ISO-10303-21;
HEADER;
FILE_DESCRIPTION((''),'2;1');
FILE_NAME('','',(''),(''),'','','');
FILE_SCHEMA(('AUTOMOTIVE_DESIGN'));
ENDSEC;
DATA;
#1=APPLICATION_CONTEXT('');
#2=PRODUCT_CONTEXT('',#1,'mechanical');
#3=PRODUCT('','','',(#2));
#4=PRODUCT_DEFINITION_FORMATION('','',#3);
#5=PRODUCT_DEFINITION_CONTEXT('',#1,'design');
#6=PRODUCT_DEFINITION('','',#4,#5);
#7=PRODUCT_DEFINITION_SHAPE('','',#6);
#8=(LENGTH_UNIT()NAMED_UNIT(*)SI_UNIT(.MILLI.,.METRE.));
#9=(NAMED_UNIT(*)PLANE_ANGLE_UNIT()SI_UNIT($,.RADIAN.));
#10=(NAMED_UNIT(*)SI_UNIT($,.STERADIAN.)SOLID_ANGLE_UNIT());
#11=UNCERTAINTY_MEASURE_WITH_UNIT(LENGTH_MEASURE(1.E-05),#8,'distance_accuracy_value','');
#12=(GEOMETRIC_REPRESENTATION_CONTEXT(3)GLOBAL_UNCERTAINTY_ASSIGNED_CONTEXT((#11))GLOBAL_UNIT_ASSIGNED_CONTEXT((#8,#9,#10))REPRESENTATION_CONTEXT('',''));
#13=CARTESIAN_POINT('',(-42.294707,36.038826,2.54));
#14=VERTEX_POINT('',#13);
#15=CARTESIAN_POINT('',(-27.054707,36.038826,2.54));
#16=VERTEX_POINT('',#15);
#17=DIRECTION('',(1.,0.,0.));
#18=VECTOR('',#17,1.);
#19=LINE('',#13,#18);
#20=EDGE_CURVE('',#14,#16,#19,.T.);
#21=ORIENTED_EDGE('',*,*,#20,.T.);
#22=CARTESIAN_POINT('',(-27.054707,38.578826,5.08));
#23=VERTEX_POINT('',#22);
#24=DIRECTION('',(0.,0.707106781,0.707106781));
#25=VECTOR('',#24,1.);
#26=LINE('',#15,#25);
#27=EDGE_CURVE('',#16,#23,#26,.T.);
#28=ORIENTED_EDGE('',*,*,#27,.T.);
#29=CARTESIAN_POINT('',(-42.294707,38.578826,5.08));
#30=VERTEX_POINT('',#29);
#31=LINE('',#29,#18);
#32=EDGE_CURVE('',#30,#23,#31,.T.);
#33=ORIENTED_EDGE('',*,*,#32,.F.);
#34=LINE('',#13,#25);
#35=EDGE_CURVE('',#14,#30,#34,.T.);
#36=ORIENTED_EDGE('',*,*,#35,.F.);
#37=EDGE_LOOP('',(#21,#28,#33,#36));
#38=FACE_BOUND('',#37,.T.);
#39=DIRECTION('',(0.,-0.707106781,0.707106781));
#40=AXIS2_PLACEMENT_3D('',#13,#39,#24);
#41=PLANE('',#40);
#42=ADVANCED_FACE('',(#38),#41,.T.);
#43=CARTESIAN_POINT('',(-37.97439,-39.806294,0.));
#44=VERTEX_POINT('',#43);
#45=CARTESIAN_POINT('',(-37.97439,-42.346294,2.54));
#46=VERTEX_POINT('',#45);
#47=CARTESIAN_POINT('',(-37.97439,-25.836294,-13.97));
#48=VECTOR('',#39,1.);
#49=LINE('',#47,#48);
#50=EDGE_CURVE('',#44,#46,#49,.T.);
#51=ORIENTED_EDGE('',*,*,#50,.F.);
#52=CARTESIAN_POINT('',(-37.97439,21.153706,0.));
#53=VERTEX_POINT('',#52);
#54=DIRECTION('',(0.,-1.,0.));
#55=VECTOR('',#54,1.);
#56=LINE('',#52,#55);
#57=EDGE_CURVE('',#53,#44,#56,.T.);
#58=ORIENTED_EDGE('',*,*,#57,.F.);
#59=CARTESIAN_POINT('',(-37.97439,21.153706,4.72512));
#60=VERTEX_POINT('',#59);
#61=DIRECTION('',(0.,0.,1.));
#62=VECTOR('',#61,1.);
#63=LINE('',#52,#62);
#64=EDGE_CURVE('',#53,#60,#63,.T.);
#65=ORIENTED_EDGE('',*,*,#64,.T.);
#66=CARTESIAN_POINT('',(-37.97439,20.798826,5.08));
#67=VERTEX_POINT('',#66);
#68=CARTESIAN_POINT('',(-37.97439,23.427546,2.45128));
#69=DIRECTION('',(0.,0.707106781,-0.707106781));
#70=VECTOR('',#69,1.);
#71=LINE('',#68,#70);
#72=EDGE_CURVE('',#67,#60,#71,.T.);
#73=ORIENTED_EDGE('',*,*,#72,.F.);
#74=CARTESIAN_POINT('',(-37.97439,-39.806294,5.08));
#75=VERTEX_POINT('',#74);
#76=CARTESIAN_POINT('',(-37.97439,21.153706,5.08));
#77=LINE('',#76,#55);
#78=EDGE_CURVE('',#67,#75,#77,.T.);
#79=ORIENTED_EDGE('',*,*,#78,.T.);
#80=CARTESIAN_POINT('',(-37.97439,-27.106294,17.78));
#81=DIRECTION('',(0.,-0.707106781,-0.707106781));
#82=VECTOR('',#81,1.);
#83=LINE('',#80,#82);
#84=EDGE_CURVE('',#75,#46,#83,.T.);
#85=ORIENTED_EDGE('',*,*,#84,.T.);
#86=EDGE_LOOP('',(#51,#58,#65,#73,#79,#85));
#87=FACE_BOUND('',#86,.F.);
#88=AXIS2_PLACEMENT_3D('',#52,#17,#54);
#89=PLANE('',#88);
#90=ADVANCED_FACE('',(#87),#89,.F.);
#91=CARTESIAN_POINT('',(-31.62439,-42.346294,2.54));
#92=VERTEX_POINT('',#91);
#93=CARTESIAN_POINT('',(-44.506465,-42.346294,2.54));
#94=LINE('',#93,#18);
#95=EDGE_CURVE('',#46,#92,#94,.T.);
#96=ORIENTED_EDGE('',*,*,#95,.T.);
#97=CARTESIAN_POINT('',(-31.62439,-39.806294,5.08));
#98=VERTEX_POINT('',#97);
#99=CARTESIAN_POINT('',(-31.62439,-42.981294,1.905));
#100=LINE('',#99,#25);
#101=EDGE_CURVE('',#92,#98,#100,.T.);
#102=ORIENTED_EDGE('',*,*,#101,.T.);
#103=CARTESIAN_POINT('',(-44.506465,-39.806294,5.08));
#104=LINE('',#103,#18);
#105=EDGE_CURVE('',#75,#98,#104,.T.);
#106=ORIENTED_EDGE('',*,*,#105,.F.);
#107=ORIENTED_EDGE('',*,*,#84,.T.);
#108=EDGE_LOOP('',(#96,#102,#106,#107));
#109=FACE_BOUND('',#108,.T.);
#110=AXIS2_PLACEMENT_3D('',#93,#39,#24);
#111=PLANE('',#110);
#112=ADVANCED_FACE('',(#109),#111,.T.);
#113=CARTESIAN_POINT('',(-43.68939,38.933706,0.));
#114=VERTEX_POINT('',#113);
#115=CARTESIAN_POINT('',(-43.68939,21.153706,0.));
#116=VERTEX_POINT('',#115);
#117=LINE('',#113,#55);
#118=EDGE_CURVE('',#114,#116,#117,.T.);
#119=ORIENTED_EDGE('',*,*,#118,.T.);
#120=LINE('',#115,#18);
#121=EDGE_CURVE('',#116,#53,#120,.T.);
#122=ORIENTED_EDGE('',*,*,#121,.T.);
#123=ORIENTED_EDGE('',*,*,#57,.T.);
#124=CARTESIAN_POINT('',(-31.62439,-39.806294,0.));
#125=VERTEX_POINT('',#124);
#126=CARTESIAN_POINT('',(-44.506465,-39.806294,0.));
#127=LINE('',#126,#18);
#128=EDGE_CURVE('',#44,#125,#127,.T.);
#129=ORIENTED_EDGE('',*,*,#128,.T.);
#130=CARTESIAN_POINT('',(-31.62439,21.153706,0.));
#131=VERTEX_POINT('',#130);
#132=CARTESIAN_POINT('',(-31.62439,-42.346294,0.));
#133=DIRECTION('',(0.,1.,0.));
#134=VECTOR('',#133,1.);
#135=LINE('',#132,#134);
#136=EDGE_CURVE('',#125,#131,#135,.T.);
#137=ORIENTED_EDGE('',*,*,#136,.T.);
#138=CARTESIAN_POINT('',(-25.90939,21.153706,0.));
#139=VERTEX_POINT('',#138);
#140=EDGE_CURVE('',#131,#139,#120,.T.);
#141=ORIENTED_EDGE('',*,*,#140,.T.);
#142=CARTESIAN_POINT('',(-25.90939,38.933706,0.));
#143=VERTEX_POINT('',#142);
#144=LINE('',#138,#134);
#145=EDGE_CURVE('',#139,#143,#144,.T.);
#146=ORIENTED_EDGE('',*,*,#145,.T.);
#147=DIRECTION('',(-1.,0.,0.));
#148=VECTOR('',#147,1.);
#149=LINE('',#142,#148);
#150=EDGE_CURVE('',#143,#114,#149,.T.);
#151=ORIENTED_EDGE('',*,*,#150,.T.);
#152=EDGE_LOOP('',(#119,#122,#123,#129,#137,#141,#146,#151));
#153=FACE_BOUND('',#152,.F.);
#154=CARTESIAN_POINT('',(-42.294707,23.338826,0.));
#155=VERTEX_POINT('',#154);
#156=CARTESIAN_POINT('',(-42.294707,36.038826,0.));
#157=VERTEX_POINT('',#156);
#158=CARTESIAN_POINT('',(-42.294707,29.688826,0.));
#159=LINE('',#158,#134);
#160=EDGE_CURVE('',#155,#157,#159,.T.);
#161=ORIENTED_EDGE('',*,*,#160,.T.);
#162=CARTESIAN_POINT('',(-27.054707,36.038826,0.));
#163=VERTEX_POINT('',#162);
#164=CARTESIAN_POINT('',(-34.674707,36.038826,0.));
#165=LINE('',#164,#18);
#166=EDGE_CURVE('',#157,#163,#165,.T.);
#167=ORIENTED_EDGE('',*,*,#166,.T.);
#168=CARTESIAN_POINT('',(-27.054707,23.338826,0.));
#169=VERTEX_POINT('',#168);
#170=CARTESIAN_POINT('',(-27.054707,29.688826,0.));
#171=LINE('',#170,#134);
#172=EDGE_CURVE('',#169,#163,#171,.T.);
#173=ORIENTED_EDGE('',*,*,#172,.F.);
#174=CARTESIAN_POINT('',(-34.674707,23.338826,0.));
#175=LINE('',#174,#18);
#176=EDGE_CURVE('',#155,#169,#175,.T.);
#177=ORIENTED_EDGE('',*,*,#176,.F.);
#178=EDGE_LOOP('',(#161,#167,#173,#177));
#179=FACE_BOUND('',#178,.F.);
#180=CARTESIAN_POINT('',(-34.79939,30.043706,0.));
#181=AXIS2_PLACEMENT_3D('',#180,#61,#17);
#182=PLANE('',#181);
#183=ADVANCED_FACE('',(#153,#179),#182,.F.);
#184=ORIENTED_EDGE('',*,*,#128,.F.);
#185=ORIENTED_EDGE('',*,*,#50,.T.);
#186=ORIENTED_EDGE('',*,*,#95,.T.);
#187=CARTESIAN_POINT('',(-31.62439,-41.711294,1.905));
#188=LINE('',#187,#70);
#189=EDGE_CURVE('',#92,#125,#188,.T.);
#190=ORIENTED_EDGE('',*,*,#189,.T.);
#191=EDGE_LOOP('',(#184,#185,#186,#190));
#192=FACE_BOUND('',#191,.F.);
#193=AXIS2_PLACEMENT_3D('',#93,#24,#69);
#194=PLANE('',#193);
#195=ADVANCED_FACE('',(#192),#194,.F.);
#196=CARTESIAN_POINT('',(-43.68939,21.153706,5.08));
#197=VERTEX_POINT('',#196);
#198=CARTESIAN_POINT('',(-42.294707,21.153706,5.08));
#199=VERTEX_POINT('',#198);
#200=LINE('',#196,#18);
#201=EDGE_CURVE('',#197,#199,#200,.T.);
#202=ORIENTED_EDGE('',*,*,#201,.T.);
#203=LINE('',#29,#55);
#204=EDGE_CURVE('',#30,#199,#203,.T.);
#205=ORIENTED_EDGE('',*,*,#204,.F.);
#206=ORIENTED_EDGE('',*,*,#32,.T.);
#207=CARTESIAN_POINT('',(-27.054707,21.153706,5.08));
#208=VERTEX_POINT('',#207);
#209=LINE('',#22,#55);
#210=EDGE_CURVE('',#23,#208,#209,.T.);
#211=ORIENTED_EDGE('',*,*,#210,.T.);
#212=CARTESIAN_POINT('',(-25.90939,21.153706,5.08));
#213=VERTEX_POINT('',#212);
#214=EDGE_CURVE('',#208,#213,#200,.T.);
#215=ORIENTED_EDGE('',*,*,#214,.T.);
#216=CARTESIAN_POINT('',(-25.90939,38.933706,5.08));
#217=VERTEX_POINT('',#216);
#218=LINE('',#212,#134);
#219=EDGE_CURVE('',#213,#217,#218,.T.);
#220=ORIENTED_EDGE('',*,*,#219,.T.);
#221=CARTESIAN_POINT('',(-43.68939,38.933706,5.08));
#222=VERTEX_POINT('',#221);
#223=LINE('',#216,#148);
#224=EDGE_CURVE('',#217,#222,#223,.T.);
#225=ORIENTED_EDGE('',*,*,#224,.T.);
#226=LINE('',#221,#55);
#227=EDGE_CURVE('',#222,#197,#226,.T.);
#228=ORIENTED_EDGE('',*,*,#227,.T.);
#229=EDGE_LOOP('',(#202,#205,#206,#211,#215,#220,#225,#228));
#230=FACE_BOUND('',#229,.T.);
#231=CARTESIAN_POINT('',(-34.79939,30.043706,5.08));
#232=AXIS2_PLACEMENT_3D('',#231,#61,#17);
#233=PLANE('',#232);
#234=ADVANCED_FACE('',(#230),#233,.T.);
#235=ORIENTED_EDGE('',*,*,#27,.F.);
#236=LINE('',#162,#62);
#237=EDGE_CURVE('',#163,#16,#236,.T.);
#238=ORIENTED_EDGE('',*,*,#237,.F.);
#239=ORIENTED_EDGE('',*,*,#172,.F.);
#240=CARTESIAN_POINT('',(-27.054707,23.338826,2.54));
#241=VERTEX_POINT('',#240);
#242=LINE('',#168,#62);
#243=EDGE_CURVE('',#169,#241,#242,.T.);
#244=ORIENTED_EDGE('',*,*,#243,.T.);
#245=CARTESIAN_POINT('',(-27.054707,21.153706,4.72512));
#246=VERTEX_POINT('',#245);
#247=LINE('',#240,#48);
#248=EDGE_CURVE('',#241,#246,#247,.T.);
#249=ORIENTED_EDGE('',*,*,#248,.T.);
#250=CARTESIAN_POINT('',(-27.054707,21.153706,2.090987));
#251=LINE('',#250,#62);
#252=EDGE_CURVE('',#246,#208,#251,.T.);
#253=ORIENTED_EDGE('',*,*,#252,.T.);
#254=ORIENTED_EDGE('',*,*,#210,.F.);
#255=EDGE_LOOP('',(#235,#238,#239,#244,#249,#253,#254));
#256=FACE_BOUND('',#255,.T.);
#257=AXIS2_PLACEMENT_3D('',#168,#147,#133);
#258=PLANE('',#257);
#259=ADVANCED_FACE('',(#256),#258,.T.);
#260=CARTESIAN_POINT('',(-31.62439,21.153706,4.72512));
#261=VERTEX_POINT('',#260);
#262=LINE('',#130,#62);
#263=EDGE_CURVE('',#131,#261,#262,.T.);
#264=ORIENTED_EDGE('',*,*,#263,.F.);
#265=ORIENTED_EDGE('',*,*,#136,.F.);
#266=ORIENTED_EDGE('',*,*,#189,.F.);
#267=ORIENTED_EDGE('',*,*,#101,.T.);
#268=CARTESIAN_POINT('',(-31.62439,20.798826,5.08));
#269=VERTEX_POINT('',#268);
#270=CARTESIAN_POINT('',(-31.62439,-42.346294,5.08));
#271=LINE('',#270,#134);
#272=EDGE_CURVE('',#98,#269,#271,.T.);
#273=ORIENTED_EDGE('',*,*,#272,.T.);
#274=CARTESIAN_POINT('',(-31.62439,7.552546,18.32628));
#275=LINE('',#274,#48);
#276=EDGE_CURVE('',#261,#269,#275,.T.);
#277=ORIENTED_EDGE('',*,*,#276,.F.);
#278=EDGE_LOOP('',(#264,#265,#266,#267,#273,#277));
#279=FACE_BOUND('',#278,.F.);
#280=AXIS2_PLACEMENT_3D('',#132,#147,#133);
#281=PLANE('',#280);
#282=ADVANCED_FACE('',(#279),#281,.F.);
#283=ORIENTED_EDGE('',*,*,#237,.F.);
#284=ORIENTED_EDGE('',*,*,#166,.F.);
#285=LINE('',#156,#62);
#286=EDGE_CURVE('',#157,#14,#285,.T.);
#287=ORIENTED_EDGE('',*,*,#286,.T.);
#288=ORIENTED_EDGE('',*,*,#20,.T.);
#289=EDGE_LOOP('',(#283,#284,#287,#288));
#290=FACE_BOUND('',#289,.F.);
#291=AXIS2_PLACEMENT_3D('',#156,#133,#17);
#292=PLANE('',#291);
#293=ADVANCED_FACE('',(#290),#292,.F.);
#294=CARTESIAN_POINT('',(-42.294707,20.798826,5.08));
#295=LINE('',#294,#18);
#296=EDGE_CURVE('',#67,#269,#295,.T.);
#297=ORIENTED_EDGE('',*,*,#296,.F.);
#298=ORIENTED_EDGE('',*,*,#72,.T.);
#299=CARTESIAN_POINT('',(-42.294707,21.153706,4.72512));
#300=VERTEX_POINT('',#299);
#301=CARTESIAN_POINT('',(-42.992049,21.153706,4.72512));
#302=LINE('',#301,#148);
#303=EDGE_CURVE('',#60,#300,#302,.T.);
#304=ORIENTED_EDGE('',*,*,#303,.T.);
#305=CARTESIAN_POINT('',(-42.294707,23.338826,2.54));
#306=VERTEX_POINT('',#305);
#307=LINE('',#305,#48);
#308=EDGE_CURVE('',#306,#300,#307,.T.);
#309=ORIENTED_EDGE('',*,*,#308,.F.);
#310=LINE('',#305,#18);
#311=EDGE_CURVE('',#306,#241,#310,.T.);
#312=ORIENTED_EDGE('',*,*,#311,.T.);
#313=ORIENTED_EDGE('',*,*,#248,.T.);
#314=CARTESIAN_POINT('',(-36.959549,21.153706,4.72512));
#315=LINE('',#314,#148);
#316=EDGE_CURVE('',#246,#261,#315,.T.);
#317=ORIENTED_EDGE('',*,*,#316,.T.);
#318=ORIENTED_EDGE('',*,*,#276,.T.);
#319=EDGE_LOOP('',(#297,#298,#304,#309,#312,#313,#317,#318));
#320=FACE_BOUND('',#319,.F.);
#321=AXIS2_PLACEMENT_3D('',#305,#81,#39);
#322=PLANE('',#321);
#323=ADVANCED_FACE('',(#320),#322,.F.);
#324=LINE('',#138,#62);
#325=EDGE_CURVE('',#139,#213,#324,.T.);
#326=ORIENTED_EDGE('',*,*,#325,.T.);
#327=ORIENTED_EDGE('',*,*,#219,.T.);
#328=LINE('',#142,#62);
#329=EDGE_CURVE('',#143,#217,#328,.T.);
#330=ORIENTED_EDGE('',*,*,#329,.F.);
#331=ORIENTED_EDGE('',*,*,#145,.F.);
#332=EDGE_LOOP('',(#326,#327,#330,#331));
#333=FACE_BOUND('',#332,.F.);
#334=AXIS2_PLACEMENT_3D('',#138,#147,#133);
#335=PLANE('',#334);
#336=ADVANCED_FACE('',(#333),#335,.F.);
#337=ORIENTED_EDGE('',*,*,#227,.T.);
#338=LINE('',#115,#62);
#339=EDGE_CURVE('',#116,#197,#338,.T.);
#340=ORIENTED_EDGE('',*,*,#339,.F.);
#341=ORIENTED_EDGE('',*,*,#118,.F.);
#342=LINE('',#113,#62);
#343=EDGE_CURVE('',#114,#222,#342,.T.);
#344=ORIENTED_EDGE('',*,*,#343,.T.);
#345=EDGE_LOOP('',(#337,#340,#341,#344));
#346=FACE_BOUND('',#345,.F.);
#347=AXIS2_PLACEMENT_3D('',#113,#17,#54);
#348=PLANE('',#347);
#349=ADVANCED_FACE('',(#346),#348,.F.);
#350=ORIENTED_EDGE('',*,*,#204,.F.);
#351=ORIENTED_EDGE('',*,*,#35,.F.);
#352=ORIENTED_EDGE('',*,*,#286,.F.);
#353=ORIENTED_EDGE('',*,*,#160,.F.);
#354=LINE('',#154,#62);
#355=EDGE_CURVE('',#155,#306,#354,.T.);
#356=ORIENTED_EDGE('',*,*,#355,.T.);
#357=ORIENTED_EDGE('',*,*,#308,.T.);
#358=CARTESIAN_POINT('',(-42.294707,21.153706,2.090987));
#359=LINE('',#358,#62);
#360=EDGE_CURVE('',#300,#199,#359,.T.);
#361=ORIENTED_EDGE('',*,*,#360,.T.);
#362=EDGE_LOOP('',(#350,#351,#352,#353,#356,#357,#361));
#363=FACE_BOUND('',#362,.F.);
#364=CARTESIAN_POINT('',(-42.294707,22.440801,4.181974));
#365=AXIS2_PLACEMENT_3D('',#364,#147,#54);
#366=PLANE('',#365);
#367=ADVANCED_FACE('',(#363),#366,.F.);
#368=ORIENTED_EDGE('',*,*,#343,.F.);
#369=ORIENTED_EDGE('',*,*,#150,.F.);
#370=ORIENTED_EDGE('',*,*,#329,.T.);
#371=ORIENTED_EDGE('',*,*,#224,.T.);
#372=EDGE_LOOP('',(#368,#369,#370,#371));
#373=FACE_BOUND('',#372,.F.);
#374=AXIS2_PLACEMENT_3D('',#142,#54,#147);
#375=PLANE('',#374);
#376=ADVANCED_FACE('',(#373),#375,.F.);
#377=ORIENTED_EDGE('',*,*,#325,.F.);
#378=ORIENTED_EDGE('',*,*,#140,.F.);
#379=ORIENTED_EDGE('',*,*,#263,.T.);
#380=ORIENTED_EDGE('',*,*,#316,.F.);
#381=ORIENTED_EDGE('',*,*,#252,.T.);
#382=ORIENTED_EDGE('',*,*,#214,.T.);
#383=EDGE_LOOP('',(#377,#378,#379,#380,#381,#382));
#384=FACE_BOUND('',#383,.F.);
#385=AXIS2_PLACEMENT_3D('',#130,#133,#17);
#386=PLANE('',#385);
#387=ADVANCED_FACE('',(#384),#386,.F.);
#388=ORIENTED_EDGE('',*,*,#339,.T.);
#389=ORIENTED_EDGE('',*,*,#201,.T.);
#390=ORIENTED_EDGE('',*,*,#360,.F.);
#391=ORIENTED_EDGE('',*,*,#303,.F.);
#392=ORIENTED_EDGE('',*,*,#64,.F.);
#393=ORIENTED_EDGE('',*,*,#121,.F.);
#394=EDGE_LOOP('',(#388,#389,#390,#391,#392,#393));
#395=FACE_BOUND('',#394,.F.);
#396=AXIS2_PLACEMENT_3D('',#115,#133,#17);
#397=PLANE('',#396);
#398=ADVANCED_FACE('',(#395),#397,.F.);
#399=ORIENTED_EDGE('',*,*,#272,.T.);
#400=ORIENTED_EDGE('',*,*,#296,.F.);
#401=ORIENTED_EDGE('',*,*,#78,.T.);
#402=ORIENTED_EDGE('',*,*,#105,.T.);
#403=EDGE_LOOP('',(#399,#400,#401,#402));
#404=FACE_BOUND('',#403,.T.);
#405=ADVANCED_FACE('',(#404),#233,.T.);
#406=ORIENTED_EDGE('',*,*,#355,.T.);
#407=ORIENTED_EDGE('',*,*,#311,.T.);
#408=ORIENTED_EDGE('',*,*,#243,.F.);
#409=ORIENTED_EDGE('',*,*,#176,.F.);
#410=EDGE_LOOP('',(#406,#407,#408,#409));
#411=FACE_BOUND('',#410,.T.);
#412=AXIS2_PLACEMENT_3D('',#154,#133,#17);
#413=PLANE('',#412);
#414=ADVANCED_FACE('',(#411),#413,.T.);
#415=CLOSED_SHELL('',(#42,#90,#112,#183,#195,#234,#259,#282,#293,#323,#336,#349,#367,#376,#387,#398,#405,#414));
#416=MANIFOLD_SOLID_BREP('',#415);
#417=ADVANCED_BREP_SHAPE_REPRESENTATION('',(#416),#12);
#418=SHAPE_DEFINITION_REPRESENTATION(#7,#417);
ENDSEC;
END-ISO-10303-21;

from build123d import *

# Parameters (mm, degrees)
F0_W        = 15.24
F0_H        = 12.7
F1_DEPTH    = 5.08
F2_T1_DEPTH = 15.24
F2_T3_DEPTH = 19.4141495789


# Not quite as in the source:
# - a fillet or chamfer that OpenCascade refuses, or shapes differently, is made with other operations: its cross-section is extruded or revolved along the edge and cut away or added
# - a feature names something its author has since deleted; it is built from what else it names


with BuildPart() as f1:
    # F0 (on Top) → F1 (new body)
    with BuildSketch(Plane.XY):
        Polygon((-43.6893899012, 21.153706044), (-37.9743899012, 21.153706044), (-34.7993899012, 21.153706044), (-31.6243899012, 21.153706044), (-25.9093899012, 21.153706044), (-25.9093899012, 38.933706044), (-43.6893899012, 38.933706044), align=None)
        with Locations((-34.6747071493, 29.6888263732)):
            Rectangle(F0_W, F0_H, mode=Mode.SUBTRACT)
        Polygon((-34.7993899012, 21.153706044), (-37.9743899012, 21.153706044), (-37.9743899012, -42.346293956), (-31.6243899012, -42.346293956), (-31.6243899012, 21.153706044), align=None)
    extrude(amount=F1_DEPTH)

    # F2: chamfer of 2.54 on 4 edges, made by hand

    # F2_s2 → F2_t1 (cut)
    with BuildSketch(Plane.YZ.offset(-42.2947071493)):
        Polygon((36.0388263732, 2.54), (38.5788263732, 5.08), (36.0388263732, 5.08), align=None)
        Polygon((23.3388263732, 2.54), (20.7988263732, 5.08), (23.3388263732, 5.08), align=None)
    extrude(amount=F2_T1_DEPTH, mode=Mode.SUBTRACT)

    # F2_s4 → F2_t3 (cut)
    with BuildSketch(Plane.YZ.offset(-44.5064646906)):
        Polygon((-42.346293956, 2.54), (-39.806293956, 5.08), (-42.346293956, 5.08), align=None)
        Polygon((-42.346293956, 2.54), (-39.806293956, 0), (-42.346293956, 0), align=None)
    extrude(amount=F2_T3_DEPTH, mode=Mode.SUBTRACT)


solid = f1.part
